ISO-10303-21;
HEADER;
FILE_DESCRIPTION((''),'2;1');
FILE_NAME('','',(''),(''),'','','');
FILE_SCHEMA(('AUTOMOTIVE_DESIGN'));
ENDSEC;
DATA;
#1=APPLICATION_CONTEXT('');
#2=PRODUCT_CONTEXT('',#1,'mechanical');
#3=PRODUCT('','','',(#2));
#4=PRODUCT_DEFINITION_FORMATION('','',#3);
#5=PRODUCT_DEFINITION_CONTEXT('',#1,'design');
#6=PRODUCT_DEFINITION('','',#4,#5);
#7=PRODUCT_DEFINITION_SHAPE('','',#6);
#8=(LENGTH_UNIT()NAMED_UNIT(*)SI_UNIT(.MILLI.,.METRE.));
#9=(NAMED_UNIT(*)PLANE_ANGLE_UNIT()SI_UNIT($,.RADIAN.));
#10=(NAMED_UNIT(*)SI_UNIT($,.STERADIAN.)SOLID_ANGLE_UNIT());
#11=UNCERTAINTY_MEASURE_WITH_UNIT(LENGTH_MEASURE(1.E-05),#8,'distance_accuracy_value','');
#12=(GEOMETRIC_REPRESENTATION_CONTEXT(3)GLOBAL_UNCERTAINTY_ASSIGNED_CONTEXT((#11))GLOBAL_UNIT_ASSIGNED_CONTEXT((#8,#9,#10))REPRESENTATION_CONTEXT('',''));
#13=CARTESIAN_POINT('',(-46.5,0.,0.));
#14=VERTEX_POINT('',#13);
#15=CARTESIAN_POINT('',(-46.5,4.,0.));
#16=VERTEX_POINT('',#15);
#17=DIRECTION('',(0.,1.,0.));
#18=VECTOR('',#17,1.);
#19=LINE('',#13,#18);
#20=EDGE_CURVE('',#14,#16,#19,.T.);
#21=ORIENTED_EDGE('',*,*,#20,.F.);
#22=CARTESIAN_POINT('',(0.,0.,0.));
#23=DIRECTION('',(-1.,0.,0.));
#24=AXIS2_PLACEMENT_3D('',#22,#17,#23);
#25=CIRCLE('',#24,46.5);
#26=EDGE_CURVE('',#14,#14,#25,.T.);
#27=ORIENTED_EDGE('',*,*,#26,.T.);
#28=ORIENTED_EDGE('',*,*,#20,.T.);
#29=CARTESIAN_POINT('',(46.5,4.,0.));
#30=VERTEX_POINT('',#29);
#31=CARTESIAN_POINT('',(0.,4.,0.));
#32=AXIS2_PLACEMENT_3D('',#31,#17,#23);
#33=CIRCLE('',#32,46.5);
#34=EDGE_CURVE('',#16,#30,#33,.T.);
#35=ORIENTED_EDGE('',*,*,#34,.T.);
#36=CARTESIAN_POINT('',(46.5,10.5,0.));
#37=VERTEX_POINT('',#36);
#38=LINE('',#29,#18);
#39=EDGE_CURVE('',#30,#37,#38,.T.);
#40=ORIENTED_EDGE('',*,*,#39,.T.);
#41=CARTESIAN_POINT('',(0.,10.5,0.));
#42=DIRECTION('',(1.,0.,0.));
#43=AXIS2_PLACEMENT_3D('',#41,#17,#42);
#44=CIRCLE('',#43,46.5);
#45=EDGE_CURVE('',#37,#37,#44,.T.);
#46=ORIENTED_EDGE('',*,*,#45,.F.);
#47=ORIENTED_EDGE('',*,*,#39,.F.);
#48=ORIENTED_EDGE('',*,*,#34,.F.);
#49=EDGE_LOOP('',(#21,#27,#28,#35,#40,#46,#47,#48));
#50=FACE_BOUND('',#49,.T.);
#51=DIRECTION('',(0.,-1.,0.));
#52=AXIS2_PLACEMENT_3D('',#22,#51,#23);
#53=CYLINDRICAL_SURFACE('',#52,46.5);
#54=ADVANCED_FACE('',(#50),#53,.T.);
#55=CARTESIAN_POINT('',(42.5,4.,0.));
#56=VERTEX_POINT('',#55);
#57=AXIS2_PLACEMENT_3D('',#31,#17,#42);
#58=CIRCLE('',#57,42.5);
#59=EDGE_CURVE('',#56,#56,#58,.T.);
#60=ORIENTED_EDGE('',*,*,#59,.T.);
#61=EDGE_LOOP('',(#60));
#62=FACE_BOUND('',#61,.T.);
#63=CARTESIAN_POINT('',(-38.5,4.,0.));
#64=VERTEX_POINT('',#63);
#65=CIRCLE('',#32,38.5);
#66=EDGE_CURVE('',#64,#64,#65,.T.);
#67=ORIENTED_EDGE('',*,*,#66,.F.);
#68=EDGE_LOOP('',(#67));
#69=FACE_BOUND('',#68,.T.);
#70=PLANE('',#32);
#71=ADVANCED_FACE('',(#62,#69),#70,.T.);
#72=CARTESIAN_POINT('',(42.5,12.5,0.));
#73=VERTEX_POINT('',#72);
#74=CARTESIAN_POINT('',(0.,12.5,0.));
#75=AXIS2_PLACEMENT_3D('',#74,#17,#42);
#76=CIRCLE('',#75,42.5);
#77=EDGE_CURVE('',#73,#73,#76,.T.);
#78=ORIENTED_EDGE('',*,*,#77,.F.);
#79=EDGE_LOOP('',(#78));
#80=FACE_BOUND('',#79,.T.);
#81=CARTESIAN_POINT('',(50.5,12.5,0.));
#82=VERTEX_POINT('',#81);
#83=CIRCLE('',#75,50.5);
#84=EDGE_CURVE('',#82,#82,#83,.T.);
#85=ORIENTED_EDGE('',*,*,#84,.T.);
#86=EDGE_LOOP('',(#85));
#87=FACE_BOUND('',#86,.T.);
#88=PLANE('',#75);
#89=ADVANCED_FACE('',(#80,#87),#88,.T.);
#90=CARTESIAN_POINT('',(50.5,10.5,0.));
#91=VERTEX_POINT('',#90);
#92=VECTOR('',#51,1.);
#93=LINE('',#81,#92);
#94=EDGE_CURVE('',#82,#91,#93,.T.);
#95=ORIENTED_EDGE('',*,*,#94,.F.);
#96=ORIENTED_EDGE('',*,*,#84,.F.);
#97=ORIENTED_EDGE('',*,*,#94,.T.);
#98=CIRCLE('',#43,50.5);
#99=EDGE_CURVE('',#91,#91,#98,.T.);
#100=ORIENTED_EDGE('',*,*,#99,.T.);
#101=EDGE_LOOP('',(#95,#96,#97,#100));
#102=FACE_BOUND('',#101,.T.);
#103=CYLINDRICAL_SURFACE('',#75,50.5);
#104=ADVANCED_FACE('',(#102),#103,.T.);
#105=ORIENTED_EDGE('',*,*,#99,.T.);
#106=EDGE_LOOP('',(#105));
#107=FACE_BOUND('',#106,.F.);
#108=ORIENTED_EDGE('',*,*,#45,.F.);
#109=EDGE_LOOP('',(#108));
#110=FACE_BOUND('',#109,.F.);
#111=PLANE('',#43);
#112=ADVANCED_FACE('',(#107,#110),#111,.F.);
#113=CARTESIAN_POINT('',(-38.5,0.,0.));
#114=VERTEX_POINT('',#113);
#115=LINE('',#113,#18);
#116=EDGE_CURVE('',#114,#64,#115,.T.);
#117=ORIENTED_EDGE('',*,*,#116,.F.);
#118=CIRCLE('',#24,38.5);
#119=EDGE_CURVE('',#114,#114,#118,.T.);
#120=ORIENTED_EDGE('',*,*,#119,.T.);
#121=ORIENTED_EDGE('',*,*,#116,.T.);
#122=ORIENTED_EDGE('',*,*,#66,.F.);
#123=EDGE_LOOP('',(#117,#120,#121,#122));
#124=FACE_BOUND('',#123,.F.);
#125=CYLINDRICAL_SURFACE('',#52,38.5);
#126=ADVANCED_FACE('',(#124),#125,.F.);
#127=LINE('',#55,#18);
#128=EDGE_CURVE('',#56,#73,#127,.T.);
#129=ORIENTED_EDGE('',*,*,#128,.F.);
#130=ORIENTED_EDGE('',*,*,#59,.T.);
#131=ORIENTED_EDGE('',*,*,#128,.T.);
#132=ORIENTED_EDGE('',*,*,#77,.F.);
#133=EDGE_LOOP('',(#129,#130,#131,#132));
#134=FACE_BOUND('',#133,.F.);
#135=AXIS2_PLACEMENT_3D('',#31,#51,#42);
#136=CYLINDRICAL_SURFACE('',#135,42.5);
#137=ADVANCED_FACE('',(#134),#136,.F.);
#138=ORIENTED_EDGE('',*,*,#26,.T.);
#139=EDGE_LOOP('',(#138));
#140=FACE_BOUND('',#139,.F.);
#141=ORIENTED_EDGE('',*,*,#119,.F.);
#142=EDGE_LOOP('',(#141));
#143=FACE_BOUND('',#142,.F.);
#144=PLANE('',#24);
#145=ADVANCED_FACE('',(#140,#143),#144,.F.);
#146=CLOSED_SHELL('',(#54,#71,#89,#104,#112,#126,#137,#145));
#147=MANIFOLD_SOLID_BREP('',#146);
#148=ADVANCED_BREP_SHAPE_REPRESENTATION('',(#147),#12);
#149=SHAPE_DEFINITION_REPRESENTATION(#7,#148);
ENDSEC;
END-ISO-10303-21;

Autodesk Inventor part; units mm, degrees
ref_plane "YZ Plane" through (0, 0, 0) normal (1, 0, 0) x (0, 1, 0)
ref_plane "XZ Plane" through (0, 0, 0) normal (0, 1, 0) x (-1, 0, 0)
ref_plane "XY Plane" through (0, 0, 0) normal (0, 0, 1) x (1, 0, 0)
sketch "Эскиз1" plane through (0, 0, 0) normal (0, 1, 0) x (-1, 0, 0)
  circle A0 centre (0, 0) radius 46.5
  circle A1 centre (0, 0) radius 38.5
  point P0 (0, 38.5)
  point P1 (0, 46.5)
  dimension "d0" = 93
  dimension "d3" = 8
extrude "Выдавливание1" add sketch "Эскиз1" along normal blind 4
sketch "Эскиз2" plane through (0, 4, 0) normal (0, 1, 0) x (1, 0, 0)
  circle A0 centre (0, 0) radius 46.5
  circle A1 centre (0, 0) radius 42.5
  circle A2 centre (0, 0) radius 46.5 projected
  point P0 (0, -42.5)
  point P1 (0, -46.5)
  point P2 (0, -46.5)
  dimension "d4" = 4
  dimension "d5" = 0
extrude "Выдавливание2" add sketch "Эскиз2" along normal blind 8.5
sketch "Эскиз3" plane through (0, 12.5, 0) normal (0, 1, 0) x (1, 0, 0)
  circle A0 centre (0, 0) radius 46.5
  circle A1 centre (0, 0) radius 50.5
  circle A2 centre (0, 0) radius 46.5 projected
  point P0 (-46.5, 0)
  point P1 (-50.5, 0)
  dimension "d8" = 93
  dimension "d9" = 4
extrude "Выдавливание3" add sketch "Эскиз3" against normal blind 2
properties part number "внешнее кольцо подшипника" material "Стекло"
